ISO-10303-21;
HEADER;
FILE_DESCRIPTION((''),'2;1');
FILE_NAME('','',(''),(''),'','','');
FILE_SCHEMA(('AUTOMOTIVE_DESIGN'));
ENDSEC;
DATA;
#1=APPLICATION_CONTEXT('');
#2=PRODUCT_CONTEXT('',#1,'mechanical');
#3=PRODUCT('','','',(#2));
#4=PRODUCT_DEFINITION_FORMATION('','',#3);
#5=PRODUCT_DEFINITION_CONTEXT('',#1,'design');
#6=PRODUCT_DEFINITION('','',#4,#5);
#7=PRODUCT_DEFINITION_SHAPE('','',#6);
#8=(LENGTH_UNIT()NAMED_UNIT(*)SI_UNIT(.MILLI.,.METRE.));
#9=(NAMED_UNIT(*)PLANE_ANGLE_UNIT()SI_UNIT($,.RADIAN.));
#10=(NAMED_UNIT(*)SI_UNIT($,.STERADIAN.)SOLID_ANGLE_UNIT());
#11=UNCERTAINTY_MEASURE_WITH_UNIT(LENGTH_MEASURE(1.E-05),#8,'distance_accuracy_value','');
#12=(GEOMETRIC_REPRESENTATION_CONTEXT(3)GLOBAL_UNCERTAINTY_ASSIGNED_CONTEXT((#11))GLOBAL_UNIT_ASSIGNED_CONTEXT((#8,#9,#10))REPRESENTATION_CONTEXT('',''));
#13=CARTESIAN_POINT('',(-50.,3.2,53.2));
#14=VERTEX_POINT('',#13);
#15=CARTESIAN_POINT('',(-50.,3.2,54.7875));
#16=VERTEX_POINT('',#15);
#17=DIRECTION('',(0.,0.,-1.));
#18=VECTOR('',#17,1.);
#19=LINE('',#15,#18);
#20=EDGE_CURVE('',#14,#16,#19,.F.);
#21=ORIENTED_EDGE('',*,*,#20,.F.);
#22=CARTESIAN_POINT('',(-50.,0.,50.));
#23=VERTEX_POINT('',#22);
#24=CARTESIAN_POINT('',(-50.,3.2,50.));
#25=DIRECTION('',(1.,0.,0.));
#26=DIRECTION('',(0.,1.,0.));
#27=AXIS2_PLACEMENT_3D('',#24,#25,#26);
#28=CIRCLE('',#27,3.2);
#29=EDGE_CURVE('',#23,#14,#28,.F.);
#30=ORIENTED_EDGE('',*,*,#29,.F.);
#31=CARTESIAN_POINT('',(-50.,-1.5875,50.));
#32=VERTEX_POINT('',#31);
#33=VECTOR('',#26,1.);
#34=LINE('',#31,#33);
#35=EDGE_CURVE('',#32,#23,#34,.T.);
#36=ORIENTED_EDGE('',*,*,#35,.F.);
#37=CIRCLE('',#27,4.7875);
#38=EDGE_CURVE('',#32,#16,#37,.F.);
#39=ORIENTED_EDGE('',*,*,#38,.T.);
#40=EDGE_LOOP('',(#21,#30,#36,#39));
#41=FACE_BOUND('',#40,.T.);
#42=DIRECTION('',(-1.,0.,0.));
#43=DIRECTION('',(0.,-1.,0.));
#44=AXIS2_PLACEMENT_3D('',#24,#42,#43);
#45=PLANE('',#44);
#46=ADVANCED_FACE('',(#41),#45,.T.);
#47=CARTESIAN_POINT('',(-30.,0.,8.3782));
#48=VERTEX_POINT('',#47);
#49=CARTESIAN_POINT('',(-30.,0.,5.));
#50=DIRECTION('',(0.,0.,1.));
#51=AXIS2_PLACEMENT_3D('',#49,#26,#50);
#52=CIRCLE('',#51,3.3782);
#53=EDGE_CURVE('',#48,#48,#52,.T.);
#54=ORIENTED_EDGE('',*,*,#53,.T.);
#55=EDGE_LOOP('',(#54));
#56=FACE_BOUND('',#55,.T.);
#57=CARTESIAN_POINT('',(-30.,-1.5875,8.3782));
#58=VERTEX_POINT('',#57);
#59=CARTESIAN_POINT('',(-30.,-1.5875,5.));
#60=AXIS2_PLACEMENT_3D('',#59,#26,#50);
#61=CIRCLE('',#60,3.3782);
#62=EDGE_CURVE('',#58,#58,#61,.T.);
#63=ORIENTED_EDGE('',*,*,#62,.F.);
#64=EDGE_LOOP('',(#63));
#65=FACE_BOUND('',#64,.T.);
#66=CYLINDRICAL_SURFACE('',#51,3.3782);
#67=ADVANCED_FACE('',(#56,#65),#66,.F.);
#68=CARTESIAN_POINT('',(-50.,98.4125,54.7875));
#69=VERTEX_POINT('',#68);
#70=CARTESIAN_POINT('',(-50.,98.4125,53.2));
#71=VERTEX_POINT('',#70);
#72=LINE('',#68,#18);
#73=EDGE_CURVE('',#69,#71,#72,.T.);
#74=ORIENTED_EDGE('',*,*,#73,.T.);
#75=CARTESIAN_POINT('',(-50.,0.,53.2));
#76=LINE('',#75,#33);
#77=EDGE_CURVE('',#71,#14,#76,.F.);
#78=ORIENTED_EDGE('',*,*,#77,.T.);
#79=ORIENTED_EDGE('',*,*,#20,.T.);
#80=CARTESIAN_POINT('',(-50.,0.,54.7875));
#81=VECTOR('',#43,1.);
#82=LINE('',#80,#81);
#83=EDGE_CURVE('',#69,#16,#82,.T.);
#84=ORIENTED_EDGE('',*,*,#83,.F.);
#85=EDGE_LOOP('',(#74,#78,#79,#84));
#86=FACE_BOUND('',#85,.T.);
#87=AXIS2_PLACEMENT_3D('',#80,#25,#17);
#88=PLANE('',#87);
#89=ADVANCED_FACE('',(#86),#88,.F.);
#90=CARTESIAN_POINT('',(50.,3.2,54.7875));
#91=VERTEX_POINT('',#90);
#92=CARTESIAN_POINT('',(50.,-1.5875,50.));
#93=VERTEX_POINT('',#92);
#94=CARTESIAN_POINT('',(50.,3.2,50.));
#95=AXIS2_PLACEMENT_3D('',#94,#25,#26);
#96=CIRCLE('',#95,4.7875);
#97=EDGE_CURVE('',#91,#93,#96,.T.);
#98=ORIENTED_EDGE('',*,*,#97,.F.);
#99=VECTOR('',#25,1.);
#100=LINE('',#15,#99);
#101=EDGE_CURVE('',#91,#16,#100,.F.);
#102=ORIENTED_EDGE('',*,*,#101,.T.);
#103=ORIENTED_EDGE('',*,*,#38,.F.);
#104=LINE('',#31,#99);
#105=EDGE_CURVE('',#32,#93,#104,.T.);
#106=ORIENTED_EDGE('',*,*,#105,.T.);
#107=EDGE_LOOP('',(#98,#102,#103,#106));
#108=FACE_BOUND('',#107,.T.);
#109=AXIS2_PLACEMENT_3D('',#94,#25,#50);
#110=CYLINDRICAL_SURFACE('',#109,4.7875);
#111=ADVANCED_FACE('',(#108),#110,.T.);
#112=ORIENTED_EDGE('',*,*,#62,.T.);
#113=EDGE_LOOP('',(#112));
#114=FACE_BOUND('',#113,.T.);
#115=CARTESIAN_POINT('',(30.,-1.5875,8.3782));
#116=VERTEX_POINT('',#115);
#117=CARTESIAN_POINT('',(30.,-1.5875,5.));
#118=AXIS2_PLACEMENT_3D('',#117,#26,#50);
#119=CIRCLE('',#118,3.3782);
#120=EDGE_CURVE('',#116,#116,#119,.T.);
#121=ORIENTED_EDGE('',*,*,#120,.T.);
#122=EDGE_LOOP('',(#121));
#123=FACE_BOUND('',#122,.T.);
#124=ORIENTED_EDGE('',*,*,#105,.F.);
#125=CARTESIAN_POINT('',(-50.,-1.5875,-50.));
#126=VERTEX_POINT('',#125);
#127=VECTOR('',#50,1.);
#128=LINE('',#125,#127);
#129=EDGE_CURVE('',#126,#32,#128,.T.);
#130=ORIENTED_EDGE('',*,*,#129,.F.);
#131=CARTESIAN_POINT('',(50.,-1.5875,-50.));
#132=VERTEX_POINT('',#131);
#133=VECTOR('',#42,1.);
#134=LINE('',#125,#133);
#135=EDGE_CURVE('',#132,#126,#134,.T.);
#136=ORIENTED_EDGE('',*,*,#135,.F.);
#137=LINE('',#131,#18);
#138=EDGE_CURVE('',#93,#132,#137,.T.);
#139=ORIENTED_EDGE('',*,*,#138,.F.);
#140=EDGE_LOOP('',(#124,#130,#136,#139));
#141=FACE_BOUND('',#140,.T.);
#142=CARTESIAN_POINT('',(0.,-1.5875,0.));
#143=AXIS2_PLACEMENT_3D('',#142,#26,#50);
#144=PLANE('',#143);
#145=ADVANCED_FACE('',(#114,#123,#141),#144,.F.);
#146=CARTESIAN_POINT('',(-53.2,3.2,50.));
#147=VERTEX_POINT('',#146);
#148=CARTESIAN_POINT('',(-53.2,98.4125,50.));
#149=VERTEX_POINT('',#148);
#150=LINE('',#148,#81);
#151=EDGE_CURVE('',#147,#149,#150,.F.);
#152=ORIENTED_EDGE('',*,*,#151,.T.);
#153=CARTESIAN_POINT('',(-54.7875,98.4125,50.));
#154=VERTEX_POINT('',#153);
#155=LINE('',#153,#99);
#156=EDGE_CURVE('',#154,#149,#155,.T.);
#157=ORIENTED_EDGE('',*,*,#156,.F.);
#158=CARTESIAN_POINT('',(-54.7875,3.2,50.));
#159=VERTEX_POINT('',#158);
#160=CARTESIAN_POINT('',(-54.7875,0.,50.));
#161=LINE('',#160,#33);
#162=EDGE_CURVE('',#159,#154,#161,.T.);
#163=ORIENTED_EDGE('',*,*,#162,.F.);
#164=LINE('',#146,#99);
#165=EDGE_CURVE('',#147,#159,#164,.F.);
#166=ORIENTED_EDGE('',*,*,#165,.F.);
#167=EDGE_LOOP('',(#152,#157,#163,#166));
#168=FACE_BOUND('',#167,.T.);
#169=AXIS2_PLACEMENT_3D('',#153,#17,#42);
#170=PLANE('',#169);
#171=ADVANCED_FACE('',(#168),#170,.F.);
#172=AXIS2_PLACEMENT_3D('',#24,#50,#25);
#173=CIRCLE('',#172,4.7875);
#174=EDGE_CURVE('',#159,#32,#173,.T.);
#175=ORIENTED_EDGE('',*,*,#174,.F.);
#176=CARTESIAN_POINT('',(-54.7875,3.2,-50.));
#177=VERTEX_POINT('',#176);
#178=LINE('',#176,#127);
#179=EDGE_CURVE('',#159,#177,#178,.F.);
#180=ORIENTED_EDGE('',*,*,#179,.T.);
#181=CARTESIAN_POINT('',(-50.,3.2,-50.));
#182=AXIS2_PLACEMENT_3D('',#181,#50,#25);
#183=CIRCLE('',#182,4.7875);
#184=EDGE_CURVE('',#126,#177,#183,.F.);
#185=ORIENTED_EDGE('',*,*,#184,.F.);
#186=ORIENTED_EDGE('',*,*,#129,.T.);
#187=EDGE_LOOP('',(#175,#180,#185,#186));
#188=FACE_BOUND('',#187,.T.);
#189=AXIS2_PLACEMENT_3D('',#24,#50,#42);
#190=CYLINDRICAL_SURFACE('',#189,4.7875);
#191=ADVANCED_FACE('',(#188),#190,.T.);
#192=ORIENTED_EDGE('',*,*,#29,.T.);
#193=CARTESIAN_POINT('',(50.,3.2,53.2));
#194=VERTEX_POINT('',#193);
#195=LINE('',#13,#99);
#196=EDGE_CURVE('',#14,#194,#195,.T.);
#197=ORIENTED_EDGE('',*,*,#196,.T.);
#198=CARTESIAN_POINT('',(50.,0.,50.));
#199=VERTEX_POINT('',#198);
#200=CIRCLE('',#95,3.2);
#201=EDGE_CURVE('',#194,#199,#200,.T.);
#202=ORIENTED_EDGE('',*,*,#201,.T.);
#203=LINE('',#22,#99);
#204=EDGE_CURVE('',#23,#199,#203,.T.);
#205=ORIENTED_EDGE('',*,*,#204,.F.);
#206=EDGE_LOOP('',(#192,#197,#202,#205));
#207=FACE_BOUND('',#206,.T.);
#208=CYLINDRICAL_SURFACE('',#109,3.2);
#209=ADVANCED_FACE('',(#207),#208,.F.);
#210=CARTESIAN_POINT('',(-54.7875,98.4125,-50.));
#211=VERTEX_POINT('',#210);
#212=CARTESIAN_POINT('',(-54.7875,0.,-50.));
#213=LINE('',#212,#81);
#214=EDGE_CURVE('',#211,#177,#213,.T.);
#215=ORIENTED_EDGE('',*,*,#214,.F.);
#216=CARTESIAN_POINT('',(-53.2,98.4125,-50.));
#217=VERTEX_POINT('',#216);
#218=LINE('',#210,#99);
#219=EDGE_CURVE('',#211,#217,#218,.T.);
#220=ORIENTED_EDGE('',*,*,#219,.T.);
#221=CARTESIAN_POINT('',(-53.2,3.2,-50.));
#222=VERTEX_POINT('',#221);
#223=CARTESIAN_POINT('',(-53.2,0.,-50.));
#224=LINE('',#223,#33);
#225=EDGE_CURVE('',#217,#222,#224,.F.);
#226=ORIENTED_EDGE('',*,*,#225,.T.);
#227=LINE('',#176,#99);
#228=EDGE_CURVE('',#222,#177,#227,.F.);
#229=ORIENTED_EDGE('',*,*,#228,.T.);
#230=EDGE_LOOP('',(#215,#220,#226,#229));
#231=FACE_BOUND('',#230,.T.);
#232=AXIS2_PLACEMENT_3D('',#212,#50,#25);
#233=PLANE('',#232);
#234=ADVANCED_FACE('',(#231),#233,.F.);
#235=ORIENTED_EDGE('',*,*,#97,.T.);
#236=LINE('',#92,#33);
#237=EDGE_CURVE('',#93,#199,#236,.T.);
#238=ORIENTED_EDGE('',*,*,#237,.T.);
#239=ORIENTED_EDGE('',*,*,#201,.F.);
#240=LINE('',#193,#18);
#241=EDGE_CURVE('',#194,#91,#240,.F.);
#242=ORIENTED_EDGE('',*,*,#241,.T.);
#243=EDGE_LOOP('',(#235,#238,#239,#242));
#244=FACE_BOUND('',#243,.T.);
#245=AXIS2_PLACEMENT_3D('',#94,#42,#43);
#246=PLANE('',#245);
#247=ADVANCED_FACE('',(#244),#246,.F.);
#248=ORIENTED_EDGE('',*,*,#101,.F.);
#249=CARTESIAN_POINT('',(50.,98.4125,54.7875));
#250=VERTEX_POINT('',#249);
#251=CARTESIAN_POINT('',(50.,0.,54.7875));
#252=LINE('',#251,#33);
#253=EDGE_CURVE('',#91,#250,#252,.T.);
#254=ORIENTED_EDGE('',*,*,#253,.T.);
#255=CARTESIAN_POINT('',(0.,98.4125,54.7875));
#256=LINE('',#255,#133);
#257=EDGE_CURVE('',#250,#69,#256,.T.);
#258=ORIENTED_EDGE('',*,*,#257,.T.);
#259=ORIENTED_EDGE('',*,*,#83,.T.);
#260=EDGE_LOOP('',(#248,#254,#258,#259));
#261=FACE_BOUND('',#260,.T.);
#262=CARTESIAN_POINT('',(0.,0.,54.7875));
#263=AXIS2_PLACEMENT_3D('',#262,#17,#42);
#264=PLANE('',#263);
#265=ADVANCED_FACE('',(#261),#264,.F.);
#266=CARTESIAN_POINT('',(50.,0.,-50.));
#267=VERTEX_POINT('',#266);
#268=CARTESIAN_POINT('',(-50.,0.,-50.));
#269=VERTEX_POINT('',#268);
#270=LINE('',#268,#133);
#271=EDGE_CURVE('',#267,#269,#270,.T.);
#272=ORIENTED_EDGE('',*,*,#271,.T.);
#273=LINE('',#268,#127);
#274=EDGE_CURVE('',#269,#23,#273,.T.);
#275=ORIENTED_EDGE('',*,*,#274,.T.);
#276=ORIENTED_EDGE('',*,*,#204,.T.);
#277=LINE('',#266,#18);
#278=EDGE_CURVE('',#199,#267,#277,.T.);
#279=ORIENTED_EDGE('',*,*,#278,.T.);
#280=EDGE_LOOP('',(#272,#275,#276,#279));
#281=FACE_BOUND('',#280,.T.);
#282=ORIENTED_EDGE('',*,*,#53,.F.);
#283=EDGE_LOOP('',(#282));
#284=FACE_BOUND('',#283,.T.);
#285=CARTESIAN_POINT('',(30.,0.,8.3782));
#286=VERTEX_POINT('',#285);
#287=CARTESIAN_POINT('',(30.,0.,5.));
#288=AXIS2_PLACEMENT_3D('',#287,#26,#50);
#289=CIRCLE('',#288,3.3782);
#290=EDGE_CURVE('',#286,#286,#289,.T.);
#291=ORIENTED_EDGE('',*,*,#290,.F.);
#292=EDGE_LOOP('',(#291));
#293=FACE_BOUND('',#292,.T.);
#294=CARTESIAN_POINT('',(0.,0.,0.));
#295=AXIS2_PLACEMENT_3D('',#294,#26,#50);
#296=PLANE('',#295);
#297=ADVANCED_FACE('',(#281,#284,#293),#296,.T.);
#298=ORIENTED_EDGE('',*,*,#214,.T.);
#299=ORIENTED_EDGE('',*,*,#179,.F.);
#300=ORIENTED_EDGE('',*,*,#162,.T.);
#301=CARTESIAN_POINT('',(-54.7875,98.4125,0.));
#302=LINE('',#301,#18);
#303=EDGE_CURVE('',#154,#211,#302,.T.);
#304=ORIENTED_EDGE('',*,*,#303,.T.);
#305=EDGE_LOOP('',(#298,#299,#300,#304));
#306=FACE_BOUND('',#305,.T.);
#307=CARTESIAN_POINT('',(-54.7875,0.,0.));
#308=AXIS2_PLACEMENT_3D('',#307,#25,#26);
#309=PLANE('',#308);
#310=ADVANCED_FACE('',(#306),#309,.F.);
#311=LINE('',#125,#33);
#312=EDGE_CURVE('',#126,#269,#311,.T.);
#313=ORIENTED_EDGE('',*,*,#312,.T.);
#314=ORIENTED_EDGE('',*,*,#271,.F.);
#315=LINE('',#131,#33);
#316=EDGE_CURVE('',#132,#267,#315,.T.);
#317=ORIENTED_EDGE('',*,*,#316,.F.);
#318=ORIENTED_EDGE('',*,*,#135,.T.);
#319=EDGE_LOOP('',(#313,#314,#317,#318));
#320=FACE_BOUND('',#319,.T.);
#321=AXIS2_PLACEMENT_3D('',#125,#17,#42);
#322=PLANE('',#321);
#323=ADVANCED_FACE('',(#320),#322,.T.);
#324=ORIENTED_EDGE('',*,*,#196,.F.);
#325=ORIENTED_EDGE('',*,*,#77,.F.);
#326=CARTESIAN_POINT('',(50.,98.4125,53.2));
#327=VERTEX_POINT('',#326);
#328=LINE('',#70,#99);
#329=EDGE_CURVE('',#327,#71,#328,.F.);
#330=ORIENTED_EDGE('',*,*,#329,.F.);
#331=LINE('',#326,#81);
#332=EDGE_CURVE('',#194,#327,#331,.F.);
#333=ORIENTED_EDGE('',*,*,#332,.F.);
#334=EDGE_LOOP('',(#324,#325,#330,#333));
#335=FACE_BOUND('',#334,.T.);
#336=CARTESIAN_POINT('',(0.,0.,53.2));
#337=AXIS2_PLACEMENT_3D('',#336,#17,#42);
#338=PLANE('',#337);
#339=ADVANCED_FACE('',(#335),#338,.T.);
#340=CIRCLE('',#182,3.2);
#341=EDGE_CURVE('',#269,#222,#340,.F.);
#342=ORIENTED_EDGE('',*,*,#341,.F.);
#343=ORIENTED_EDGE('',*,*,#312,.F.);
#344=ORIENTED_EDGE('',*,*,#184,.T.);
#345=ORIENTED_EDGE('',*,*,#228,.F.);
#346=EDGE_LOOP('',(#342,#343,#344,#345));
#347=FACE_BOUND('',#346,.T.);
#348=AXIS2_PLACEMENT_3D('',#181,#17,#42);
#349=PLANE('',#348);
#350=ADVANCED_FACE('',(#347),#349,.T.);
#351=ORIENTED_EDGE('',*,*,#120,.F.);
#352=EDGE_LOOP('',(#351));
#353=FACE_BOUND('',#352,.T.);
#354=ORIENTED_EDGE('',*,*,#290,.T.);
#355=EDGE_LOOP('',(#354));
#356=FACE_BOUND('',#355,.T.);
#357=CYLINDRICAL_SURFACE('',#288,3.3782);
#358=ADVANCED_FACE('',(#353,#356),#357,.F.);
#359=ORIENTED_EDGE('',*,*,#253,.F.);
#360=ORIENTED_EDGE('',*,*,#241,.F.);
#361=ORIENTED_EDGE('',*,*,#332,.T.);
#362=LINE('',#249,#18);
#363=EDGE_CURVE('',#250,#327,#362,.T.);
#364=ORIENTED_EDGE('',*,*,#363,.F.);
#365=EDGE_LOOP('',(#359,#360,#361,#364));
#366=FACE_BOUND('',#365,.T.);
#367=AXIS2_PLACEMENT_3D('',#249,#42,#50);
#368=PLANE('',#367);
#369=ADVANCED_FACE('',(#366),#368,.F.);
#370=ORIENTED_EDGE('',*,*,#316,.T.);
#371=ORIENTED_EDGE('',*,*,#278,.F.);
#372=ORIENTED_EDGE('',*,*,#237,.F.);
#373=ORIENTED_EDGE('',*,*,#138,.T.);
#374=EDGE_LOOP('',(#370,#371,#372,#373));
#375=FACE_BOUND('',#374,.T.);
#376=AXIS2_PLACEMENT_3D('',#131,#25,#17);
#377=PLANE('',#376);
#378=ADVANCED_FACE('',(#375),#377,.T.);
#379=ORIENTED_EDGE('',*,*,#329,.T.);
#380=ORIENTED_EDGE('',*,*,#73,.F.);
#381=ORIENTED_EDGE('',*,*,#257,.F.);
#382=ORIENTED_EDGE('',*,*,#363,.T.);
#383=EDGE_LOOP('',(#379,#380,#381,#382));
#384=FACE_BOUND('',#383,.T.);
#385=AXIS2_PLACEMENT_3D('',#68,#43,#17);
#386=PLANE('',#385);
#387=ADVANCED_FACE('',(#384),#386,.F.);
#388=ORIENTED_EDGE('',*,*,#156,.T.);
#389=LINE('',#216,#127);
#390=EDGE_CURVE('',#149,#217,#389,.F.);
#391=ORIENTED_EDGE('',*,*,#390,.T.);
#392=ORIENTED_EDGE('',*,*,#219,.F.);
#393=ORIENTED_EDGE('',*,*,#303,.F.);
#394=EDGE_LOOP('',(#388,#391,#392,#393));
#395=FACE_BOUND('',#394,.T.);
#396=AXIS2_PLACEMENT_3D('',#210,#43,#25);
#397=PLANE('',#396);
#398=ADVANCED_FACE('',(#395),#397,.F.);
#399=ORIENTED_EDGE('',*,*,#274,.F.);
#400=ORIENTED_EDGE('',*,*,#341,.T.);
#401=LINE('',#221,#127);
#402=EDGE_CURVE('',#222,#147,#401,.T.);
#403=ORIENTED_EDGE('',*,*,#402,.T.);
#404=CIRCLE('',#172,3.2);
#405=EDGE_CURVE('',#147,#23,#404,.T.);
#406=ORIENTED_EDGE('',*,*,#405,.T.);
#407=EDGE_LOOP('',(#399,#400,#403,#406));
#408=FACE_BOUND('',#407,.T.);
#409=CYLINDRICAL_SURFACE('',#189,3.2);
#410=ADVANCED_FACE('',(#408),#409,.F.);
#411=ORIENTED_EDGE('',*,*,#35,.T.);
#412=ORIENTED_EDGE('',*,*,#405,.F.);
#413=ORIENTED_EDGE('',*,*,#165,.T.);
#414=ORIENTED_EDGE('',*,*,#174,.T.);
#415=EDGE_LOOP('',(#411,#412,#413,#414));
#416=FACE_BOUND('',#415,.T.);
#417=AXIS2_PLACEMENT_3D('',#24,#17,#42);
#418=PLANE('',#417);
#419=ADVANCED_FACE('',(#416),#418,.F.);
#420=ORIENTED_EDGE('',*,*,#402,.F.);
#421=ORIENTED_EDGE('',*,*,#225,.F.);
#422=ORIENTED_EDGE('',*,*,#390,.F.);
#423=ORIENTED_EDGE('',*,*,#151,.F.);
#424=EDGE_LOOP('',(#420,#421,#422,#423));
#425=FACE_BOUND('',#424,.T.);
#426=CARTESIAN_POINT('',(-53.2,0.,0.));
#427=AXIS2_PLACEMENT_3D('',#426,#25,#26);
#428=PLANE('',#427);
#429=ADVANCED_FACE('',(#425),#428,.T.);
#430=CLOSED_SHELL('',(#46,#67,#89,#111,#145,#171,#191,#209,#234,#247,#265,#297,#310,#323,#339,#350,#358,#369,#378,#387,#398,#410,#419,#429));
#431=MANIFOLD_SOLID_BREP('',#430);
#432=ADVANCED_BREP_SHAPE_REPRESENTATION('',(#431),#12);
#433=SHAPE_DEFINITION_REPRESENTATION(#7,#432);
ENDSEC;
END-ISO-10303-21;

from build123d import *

# Parameters (mm, degrees)
SKETCH1_W               = 100
SKETCH1_H               = 100
BASE_FLANGE1_DEPTH      = 1.5875
EDGE_FLANGE1_DEPTH      = 100
EDGE_FLANGE2_DEPTH      = 100
F_1_4_CLEARANCE_HOLE1_D = 6.7564


# Sheet-metal steps are written as plain solids
with BuildPart() as part:
    # Sketch1 → Base-Flange1 (new body)
    with BuildSketch(Plane(origin=(0, 0, 0), x_dir=(1, 0, 0), z_dir=(0, 1, 0))):
        Rectangle(SKETCH1_W, SKETCH1_H)
    extrude(amount=-BASE_FLANGE1_DEPTH)

    # Edge-Flange1 section (across the edge) → Edge-Flange1 (add)
    with BuildSketch(Plane(origin=(-53.2, 0, -50), x_dir=(1, 0, 0), z_dir=(0, 0, 1))):
        with BuildLine():
            Line((-1.5875, 3.2), (-1.5875, 98.4125))
            Line((-1.5875, 98.4125), (0, 98.4125))
            Line((0, 98.4125), (0, 3.2))
            ThreePointArc((0, 3.2), (0.9372583, 0.9372583), (3.2, 0))
            Line((3.2, 0), (3.2, -1.5875))
            ThreePointArc((3.2, -1.5875), (-0.185273715, -0.185273715), (-1.5875, 3.2))
        make_face()
    extrude(amount=EDGE_FLANGE1_DEPTH)

    # Edge-Flange2 section (across the edge) → Edge-Flange2 (add)
    with BuildSketch(Plane(origin=(-50, 0, 53.2), x_dir=(0, 0, -1), z_dir=(1, 0, 0))):
        with BuildLine():
            Line((-1.5875, 3.2), (-1.5875, 98.4125))
            Line((-1.5875, 98.4125), (0, 98.4125))
            Line((0, 98.4125), (0, 3.2))
            ThreePointArc((0, 3.2), (0.9372583, 0.9372583), (3.2, 0))
            Line((3.2, 0), (3.2, -1.5875))
            ThreePointArc((3.2, -1.5875), (-0.185273715, -0.185273715), (-1.5875, 3.2))
        make_face()
    extrude(amount=EDGE_FLANGE2_DEPTH)

    # 1/4 Clearance Hole1 (through all)
    with Locations(Plane(origin=(0, 0, 0), x_dir=(1, 0, 0), z_dir=(0, 1, 0))):
        with Locations((-30, -5), (30, -5)):
            Hole(F_1_4_CLEARANCE_HOLE1_D / 2)


solid = part.part
